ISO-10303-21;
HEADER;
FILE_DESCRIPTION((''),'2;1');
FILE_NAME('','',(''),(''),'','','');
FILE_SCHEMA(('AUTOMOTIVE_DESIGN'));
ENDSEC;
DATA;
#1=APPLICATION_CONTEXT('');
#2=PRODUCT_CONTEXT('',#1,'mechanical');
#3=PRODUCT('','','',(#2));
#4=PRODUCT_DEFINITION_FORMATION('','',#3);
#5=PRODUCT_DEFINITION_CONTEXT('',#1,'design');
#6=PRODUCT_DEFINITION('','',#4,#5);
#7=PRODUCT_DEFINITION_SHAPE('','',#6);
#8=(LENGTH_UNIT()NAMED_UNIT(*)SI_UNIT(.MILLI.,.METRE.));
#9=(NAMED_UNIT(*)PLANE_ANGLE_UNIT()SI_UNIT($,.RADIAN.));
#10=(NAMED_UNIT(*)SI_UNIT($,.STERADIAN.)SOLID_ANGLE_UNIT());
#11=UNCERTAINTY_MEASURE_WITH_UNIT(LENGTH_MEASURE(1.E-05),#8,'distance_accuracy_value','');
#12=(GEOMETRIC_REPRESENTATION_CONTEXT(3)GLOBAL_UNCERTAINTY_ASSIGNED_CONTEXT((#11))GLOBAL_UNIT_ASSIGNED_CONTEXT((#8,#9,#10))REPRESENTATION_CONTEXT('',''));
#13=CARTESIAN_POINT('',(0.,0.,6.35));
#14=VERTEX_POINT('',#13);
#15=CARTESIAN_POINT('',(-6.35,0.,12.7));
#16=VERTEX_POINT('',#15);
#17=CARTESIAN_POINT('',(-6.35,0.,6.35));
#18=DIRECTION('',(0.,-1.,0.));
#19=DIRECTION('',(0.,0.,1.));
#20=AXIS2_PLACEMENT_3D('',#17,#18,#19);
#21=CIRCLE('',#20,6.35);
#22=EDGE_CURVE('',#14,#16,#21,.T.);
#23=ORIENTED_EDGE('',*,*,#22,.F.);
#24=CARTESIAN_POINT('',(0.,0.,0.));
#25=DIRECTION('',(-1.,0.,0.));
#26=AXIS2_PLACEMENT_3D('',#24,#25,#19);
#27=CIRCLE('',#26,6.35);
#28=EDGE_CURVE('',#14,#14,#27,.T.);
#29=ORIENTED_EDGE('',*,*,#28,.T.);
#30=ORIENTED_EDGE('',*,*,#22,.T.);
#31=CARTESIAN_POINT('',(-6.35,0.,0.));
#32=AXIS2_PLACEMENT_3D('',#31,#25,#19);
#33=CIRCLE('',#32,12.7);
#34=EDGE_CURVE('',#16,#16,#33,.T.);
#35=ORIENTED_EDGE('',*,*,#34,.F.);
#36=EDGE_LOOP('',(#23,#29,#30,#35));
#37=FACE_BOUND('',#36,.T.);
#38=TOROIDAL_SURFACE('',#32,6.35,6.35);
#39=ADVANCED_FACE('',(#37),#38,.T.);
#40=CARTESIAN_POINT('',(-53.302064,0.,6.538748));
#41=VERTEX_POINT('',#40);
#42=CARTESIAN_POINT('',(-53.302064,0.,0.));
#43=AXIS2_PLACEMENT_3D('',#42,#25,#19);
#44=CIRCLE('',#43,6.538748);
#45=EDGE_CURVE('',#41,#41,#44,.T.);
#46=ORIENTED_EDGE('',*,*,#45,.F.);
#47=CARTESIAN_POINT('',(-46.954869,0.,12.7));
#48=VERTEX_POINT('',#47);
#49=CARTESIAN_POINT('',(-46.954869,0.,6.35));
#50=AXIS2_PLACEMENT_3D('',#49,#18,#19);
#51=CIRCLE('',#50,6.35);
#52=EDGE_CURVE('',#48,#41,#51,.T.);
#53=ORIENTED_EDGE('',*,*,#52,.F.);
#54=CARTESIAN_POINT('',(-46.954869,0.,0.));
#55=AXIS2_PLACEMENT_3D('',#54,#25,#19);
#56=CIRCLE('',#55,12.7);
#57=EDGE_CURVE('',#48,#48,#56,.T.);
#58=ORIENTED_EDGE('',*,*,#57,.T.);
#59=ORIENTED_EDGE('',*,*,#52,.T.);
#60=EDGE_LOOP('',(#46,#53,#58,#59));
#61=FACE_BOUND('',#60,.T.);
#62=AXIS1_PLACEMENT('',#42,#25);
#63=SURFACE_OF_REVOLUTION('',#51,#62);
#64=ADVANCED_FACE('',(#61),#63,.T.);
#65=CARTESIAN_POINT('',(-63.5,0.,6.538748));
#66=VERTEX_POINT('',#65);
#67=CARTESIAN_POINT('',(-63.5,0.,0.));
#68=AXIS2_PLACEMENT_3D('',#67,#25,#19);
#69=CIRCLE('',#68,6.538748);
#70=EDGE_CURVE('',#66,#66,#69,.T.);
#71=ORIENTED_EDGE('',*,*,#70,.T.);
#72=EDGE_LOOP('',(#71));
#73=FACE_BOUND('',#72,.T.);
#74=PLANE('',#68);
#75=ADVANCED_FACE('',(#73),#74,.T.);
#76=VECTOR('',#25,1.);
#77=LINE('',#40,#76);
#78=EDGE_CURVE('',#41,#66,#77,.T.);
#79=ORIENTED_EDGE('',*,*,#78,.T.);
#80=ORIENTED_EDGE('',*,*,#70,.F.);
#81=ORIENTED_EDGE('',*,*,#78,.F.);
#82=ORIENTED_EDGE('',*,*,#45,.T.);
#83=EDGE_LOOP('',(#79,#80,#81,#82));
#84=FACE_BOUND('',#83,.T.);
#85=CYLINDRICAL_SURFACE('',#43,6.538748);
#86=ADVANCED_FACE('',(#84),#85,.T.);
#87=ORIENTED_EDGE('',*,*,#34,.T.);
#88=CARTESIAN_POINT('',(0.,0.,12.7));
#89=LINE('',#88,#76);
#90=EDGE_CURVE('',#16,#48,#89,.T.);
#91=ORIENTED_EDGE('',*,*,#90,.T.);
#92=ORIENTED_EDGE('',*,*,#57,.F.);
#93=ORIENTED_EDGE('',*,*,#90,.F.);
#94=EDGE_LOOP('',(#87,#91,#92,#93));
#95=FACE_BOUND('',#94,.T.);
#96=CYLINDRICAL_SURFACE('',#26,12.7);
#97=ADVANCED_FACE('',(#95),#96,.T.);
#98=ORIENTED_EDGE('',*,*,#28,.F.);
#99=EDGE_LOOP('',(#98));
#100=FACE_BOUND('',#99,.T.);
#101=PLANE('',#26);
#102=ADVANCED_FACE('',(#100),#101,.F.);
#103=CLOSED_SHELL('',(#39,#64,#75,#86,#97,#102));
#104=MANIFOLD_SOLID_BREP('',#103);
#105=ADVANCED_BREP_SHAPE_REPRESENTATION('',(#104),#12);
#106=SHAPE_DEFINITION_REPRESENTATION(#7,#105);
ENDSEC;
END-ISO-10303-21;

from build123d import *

# Parameters (mm, degrees)
F2_R = 6.35


# Not quite as in the source:
# - a fillet or chamfer that OpenCascade refuses, or shapes differently, is made with other operations: its cross-section is extruded or revolved along the edge and cut away or added


with BuildPart() as f1:
    # F0 (on Front) → F1 (revolve)
    with BuildSketch(Plane.XZ):
        Polygon((-63.5, 0), (0, 0), (0, 12.7), (-53.3020635424, 12.7), (-53.3020635424, 6.5387478179), (-63.5, 6.5387478179), align=None)
    revolve(axis=Axis((-31.75, 0, 0), (-1, 0, 0)))

    # F2
    f2_edges = [f1.edges().sort_by_distance(p)[0] for p in [
        (0, 0, -12.7),
    ]]
    fillet(f2_edges, radius=F2_R)

    # F3: fillet of radius 6.35 on 1 edges, made by hand

    # F3_s1 → F3_t2 (revolve, cut)
    with BuildSketch(Plane.XZ):
        with BuildLine():
            ThreePointArc((-46.9548693385, 12.7), (-51.3777615685, 10.9063718375), (-53.3020635424, 6.5387478179))
            Line((-53.3020635424, 6.5387478179), (-53.3020635424, 12.7))
            Line((-53.3020635424, 12.7), (-46.9548693385, 12.7))
        make_face()
    revolve(axis=Axis((-53.3020635424, 0, 0), (-1, 0, 0)), mode=Mode.SUBTRACT)


solid = f1.part
